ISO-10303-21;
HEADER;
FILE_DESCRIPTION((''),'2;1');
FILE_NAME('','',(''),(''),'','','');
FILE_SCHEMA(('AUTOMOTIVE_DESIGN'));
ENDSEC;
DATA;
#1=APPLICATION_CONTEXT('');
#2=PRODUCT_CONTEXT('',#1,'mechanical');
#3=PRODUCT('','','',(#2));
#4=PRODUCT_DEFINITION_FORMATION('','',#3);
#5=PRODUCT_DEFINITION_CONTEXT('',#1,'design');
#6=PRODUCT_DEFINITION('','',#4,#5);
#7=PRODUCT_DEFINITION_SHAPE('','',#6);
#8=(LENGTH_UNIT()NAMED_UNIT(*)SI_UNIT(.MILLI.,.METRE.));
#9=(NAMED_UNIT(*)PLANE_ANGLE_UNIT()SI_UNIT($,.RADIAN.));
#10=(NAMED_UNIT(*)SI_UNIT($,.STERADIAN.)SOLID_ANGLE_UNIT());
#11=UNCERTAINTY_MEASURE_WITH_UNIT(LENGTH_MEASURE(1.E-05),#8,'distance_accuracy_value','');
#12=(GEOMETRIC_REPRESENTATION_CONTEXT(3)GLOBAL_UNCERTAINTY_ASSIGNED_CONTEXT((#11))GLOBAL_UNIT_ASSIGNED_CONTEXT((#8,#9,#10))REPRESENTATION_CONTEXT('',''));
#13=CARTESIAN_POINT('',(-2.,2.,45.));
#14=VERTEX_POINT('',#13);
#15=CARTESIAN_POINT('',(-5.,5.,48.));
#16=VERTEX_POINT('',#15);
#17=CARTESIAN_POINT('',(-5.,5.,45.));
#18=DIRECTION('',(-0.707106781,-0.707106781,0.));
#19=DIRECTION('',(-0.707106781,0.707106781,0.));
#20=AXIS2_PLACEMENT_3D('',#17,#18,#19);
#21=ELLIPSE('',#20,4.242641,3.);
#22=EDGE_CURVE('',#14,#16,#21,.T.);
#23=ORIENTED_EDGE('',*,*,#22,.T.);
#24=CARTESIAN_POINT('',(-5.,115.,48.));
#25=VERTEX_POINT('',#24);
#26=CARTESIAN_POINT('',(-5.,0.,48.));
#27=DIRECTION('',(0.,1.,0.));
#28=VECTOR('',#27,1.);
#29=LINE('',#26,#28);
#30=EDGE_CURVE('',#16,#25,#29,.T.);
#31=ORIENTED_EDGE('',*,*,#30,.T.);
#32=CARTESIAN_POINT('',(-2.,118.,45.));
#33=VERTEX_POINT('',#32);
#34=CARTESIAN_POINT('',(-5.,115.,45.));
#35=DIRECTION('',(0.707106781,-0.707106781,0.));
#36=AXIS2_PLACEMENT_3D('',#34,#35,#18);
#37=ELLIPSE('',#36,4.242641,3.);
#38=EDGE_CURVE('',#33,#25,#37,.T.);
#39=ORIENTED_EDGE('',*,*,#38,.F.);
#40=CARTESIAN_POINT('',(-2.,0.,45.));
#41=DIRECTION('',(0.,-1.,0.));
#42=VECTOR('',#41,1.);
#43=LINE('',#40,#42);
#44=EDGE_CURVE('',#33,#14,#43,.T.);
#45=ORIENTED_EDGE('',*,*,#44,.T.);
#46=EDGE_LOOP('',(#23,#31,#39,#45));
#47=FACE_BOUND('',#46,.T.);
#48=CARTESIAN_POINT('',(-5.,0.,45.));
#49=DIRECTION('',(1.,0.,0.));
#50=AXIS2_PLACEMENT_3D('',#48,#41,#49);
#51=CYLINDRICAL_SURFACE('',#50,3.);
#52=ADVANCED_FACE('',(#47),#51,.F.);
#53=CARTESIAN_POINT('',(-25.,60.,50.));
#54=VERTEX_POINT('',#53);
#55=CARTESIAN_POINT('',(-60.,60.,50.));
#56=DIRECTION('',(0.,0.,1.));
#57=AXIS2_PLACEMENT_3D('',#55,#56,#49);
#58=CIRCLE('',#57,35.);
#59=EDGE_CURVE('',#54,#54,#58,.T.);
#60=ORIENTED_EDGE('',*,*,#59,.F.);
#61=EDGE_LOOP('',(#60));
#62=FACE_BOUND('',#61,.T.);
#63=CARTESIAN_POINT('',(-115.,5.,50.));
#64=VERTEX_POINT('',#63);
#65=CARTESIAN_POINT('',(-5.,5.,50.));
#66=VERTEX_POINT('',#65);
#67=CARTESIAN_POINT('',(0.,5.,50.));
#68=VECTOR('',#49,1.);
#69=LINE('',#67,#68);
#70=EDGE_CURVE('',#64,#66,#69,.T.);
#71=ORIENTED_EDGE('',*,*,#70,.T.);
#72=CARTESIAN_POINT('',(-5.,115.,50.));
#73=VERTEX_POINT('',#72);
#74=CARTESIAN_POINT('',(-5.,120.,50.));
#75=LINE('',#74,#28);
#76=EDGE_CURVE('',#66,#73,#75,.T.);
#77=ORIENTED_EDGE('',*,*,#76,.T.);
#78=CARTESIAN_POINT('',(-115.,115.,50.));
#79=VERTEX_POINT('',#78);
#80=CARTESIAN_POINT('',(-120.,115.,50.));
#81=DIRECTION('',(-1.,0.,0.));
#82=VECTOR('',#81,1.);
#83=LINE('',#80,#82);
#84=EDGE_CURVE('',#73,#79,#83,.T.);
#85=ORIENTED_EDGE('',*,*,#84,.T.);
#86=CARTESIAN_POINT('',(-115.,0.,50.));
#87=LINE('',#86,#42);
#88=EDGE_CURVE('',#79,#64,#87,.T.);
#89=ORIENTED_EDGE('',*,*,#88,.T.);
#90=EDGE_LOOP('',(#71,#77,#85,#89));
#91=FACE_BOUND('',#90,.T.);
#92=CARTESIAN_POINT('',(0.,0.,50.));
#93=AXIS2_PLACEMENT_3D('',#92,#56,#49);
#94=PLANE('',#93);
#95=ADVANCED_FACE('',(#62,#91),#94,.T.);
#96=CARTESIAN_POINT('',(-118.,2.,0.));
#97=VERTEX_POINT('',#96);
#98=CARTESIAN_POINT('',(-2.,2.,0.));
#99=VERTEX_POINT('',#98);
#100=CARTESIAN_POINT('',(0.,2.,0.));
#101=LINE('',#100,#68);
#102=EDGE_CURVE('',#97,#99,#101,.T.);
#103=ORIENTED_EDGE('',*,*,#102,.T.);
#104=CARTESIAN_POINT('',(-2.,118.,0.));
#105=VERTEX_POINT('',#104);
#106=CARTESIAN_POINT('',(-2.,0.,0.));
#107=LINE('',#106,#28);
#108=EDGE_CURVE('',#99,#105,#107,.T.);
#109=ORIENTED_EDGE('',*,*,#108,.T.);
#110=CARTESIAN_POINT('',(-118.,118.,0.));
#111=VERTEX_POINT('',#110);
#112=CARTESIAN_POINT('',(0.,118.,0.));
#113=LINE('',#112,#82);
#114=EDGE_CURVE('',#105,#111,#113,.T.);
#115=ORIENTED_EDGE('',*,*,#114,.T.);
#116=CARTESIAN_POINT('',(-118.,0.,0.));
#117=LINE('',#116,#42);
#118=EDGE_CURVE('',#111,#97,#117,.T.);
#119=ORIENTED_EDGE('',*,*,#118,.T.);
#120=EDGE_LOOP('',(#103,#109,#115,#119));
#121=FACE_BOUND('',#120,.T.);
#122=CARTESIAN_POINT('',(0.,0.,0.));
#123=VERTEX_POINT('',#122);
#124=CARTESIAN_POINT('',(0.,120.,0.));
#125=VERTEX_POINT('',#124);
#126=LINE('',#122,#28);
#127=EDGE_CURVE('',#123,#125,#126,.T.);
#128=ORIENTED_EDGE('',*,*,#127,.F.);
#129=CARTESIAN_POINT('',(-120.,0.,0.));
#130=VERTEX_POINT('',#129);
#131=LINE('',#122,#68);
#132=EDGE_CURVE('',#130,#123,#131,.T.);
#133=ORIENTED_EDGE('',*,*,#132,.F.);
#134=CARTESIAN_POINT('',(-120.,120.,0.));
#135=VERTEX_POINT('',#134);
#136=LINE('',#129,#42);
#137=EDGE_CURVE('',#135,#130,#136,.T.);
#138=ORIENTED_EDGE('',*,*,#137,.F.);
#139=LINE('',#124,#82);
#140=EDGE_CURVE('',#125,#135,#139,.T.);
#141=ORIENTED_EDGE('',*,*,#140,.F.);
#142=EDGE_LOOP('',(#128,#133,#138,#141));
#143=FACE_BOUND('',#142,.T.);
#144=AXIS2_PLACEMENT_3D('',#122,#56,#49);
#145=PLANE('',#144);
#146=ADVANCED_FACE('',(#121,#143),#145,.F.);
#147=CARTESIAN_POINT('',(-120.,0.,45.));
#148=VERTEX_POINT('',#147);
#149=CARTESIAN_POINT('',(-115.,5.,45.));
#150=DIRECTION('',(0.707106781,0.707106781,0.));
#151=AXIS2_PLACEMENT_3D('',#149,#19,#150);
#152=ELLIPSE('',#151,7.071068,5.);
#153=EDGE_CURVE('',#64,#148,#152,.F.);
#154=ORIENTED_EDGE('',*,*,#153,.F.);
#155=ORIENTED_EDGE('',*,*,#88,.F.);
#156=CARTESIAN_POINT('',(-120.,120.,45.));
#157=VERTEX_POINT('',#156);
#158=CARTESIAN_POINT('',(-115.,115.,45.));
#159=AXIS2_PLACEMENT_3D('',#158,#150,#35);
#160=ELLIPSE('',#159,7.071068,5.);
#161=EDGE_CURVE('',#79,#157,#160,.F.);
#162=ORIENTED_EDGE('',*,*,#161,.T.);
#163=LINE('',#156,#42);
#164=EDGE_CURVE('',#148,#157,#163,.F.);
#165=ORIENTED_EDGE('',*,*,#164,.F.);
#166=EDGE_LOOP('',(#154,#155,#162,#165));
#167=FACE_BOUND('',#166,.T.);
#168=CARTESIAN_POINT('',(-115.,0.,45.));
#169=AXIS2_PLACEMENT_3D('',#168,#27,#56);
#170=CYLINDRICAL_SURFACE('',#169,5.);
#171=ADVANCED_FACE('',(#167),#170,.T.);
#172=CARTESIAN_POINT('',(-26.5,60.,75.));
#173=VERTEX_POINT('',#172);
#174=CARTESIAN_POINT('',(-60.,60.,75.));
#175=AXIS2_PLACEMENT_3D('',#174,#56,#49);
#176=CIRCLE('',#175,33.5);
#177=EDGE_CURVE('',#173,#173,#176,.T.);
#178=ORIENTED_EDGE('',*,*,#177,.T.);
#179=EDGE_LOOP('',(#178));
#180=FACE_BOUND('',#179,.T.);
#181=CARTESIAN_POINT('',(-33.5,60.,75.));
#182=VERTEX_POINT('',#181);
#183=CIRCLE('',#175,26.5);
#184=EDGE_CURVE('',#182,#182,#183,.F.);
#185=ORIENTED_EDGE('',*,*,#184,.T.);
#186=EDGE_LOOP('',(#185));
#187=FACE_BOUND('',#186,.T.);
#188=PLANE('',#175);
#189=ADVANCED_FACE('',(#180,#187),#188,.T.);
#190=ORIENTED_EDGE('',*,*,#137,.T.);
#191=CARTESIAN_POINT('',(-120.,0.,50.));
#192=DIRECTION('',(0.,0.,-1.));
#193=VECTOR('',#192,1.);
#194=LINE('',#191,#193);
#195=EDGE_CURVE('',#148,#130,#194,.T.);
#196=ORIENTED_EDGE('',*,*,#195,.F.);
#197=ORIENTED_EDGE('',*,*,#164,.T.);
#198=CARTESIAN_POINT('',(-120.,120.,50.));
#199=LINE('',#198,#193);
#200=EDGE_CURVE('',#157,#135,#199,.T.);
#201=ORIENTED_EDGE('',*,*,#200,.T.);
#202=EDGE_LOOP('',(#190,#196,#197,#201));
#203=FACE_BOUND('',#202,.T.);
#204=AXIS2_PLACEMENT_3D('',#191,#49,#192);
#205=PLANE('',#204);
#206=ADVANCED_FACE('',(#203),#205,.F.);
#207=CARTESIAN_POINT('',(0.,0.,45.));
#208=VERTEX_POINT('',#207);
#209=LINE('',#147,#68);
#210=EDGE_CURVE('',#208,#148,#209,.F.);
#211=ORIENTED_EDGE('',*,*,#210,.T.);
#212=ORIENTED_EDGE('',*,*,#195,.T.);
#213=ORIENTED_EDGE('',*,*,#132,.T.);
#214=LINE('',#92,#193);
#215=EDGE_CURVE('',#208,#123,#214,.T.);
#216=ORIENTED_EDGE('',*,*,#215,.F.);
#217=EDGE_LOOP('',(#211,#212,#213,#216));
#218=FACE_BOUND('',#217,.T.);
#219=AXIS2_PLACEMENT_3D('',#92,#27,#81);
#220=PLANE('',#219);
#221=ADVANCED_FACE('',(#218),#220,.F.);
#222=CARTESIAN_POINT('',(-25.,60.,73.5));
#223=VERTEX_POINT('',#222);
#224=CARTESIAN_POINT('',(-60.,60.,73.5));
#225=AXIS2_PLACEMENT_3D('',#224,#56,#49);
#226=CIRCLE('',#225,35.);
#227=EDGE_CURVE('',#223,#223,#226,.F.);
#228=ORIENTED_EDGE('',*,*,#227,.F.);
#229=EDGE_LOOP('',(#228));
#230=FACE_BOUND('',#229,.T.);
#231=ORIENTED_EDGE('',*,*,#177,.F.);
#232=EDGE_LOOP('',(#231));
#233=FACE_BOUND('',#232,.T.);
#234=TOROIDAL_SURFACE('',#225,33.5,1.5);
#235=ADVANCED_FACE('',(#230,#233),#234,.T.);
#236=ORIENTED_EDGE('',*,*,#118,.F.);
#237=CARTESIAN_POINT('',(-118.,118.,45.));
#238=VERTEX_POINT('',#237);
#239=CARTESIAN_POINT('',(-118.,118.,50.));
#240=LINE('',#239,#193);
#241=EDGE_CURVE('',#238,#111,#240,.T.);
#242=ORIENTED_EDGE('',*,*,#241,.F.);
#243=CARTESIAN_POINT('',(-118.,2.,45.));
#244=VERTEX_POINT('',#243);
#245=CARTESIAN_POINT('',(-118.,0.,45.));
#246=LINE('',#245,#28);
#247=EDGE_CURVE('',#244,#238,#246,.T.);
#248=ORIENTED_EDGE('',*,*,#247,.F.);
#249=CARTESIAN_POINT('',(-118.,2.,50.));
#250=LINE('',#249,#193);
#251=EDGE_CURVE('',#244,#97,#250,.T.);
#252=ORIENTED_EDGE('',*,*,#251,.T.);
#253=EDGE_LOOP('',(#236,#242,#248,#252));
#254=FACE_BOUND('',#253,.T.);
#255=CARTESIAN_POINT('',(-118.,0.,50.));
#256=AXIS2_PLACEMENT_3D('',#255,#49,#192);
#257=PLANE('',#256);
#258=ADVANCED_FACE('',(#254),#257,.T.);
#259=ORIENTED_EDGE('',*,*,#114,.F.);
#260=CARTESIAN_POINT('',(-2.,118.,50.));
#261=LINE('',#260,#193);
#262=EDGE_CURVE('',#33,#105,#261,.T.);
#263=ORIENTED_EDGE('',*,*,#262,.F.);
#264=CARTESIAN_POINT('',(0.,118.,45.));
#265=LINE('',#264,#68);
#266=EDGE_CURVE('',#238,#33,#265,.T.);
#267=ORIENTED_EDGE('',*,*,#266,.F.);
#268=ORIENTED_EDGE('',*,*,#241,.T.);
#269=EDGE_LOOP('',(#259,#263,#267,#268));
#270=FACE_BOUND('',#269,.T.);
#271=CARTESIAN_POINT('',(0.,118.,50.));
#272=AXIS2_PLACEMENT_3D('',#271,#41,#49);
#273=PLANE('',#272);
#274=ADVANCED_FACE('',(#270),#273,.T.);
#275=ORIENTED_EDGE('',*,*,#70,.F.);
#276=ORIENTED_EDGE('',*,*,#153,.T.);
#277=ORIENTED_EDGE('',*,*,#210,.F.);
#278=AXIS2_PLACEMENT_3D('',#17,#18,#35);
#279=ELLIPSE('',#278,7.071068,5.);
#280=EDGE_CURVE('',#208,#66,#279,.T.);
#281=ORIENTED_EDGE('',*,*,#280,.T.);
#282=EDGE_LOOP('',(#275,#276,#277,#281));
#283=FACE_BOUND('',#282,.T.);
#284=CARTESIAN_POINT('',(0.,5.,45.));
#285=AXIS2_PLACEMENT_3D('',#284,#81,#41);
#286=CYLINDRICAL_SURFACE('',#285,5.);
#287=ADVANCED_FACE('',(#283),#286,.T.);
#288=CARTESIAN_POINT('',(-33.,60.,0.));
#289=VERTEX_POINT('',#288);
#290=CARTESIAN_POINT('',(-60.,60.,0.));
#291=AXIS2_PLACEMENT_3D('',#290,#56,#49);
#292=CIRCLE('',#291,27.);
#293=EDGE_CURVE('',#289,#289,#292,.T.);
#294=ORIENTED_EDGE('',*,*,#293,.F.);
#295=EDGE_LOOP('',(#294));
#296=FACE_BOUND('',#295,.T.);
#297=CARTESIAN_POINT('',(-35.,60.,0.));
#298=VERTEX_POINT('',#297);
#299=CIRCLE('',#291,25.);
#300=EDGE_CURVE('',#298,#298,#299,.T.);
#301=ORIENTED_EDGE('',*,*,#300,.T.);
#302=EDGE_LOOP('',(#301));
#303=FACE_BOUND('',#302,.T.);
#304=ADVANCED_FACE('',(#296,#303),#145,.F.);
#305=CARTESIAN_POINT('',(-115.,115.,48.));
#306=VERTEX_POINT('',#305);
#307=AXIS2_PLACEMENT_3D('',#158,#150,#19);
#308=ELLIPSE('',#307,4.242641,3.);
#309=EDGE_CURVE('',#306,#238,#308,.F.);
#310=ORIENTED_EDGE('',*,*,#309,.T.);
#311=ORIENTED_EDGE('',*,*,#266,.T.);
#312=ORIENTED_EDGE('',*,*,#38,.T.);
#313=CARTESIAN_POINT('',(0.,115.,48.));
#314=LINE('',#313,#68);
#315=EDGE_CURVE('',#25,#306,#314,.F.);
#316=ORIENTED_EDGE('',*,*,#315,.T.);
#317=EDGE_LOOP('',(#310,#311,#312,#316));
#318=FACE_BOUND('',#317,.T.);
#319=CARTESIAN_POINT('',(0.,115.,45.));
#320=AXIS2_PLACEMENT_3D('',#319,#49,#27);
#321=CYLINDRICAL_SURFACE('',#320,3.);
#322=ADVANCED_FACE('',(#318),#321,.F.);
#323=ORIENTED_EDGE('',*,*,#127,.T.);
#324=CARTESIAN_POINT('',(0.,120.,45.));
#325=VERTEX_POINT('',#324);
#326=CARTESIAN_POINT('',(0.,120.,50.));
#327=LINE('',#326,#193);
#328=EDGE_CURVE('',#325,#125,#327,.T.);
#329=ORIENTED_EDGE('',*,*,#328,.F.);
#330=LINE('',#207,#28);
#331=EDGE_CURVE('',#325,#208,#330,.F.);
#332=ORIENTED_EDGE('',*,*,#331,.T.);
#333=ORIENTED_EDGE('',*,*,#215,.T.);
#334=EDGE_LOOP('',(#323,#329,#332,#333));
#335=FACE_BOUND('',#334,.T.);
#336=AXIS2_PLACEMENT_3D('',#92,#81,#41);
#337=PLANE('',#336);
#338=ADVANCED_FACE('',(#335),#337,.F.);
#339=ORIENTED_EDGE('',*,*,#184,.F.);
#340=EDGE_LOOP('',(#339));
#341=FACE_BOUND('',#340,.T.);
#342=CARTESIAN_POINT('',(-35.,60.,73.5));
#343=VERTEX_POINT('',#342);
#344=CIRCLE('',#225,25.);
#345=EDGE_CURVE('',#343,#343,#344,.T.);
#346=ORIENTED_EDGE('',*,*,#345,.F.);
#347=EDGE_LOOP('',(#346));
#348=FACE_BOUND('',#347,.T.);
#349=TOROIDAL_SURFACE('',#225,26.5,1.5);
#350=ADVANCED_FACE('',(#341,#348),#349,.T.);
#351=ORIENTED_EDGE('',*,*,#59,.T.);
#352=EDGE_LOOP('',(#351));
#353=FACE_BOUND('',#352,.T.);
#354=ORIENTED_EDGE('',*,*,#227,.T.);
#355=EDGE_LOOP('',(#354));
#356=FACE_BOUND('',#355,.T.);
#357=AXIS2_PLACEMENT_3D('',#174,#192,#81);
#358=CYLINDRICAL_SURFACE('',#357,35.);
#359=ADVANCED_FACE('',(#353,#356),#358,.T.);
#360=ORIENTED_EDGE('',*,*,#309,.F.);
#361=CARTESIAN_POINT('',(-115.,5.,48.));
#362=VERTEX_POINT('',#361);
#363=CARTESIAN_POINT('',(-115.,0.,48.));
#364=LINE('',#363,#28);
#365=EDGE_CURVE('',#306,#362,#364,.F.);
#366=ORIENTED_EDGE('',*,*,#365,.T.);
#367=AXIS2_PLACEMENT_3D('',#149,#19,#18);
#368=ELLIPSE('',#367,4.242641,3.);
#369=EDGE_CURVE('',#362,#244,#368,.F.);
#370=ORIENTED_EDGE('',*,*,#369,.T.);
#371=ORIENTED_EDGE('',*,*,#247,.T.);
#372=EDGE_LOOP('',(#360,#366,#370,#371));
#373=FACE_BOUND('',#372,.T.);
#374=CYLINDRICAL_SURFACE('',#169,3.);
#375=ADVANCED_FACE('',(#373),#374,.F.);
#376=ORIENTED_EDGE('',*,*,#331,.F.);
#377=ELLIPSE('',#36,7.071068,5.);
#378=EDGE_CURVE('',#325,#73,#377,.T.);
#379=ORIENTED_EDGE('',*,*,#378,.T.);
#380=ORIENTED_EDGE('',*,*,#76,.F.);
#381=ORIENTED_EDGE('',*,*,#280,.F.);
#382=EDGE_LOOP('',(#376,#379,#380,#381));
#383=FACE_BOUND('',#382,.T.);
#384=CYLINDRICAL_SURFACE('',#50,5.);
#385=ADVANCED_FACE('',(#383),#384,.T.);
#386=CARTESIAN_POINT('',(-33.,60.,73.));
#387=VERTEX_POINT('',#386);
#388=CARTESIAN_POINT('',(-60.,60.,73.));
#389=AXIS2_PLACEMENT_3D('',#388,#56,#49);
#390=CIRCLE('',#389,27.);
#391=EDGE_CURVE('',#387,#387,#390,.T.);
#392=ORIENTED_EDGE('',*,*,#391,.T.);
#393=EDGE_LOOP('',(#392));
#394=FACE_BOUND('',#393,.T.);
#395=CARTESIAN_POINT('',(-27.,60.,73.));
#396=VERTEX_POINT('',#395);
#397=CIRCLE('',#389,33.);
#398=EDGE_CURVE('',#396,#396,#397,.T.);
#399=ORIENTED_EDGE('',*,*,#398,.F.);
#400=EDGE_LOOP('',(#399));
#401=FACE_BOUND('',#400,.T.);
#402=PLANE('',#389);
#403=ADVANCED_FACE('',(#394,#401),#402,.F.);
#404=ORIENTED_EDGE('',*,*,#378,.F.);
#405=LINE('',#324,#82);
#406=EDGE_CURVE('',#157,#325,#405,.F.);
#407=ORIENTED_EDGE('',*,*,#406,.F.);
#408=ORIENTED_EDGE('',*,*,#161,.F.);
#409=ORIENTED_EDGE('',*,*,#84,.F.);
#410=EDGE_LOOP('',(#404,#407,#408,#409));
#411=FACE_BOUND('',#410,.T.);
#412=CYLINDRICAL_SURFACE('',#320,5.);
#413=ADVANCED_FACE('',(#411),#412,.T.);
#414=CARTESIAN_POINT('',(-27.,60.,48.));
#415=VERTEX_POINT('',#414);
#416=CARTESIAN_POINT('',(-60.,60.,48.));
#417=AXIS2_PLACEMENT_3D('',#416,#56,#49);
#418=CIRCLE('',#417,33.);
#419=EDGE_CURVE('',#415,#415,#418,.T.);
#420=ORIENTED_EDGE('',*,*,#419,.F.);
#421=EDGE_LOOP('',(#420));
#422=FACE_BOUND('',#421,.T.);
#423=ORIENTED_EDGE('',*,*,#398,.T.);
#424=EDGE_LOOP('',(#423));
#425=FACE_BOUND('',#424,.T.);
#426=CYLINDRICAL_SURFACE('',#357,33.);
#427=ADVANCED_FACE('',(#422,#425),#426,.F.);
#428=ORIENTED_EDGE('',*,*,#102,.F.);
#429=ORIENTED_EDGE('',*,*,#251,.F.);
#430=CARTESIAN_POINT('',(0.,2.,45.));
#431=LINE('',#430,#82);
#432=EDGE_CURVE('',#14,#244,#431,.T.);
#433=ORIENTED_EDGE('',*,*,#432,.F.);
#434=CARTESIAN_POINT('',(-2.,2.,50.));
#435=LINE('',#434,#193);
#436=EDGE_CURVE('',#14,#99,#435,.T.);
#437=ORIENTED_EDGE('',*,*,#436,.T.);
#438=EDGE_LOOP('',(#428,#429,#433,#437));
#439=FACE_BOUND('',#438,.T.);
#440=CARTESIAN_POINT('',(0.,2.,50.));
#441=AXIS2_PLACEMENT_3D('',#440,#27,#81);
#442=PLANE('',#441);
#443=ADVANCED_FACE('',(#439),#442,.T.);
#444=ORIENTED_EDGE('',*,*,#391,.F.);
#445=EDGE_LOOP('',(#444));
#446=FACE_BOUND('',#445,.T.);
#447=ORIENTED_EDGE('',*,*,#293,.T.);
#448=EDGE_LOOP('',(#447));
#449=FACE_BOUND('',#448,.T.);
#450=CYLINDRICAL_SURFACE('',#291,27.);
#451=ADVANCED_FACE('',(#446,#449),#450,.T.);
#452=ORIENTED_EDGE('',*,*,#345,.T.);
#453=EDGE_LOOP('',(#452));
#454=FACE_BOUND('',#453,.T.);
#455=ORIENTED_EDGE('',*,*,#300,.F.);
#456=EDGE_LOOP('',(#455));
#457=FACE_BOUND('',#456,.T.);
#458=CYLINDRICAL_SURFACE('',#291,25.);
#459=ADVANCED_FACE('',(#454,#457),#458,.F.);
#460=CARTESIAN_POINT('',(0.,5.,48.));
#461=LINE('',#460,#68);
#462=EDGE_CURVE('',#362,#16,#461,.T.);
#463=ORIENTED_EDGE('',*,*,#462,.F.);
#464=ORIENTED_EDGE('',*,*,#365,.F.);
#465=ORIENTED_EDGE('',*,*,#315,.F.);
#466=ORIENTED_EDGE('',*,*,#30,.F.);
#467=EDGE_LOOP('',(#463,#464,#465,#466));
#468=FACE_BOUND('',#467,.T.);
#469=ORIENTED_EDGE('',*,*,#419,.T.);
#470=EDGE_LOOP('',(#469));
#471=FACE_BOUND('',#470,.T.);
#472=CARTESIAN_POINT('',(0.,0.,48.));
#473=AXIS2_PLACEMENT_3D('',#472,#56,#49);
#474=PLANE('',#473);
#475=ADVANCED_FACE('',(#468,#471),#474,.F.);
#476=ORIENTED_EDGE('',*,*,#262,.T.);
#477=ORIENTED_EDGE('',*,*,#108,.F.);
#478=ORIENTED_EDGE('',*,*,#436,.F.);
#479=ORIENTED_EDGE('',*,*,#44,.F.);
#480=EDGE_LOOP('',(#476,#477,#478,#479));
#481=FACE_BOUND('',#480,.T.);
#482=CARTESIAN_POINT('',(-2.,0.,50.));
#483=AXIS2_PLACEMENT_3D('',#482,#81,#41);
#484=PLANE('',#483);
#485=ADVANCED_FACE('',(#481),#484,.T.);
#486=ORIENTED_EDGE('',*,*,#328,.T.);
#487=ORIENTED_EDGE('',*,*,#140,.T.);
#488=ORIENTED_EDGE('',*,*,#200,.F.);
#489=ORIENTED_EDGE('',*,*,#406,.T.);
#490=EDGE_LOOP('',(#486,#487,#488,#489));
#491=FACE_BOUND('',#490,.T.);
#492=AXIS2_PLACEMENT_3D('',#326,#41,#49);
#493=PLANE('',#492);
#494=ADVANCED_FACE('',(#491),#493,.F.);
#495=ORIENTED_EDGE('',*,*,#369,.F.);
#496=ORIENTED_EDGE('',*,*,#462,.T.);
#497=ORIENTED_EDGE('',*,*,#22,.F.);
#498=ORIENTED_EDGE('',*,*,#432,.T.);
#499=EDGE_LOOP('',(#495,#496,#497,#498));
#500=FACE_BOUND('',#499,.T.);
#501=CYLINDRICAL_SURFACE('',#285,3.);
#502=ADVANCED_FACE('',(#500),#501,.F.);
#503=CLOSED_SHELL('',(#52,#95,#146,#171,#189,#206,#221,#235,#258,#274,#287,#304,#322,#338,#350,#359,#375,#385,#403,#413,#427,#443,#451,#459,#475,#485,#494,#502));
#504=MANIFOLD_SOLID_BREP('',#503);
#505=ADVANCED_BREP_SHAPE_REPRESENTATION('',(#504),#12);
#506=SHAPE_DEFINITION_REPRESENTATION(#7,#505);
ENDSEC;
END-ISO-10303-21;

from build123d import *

# Parameters (mm, degrees)
SKETCH2_W            = 120
SKETCH2_H            = 120
BOSS_EXTRUDE1_DEPTH  = 50
SKETCH3_R            = 35
BOSS_EXTRUDE2_DEPTH  = 25
SKETCH4_R            = 25
CUT_EXTRUDE1_DEPTH   = 186.539753153
FILLET1_R            = 5
FILLET2_R            = 1.5
SHELL1_OUTLINE_W     = 116
SHELL1_OUTLINE_H     = 116
SHELL1_OUTLINE_R     = 27
SHELL1_DEPTH         = 45
SHELL1_2_OUTLINE_R   = 33
SHELL1_2_OUTLINE_R_2 = 27
SHELL1_2_DEPTH       = 73
SHELL1_START         = -118
SHELL1_3_DEPTH       = 116
SHELL1_START_2       = 1
SHELL1_4_DEPTH       = 118
SHELL1_START_3       = 45
SHELL1_5_OUTLINE_R   = 27
SHELL1_5_OUTLINE_R_2 = 25
SHELL1_5_DEPTH       = 3


with BuildPart() as part:
    # Sketch2 → Boss-Extrude1 (new body)
    with BuildSketch(Plane.XY):
        with Locations((-60, 60)):
            Rectangle(SKETCH2_W, SKETCH2_H)
    extrude(amount=BOSS_EXTRUDE1_DEPTH)

    # Sketch3 → Boss-Extrude2 (add)
    with BuildSketch(Plane.XY.offset(50)):
        with Locations((-60, 60)):
            Circle(SKETCH3_R)
    extrude(amount=BOSS_EXTRUDE2_DEPTH)

    # Sketch4 → Cut-Extrude1 (cut, through all)
    with BuildSketch(Plane.XY.offset(75)):
        with Locations((-60, 60)):
            Circle(SKETCH4_R)
    extrude(amount=-CUT_EXTRUDE1_DEPTH, mode=Mode.SUBTRACT)

    # Fillet1
    fillet1_edges = [part.edges().sort_by_distance(p)[0] for p in [
        (-120, 60, 50),
        (-60, 0, 50),
        (0, 60, 50),
        (-60, 120, 50),
    ]]
    fillet(fillet1_edges, radius=FILLET1_R)

    # Fillet2
    fillet2_edges = [part.edges().sort_by_distance(p)[0] for p in [
        (-95, 60, 75),
        (-85, 60, 75),
    ]]
    fillet(fillet2_edges, radius=FILLET2_R)

    # Shell1: read off the stored shape, not the designer's step
    # Shell1 outline → Shell1 (cut)
    with BuildSketch(Plane.XY):
        with Locations((-60, 60)):
            Rectangle(SHELL1_OUTLINE_W, SHELL1_OUTLINE_H)
        with Locations((-60, 60)):
            Circle(SHELL1_OUTLINE_R, mode=Mode.SUBTRACT)
    extrude(amount=SHELL1_DEPTH, mode=Mode.SUBTRACT)

    # Shell1 2 outline → Shell1 2 (cut)
    with BuildSketch(Plane.XY):
        with Locations((-60, 60)):
            Circle(SHELL1_2_OUTLINE_R)
        with Locations((-60, 60)):
            Circle(SHELL1_2_OUTLINE_R_2, mode=Mode.SUBTRACT)
    extrude(amount=SHELL1_2_DEPTH, mode=Mode.SUBTRACT)

    # Shell1 3 outline → Shell1 3 (cut)
    with BuildSketch(Plane.YZ.offset(SHELL1_START)):
        with BuildLine():
            ThreePointArc((118, 45), (117.121320344, 47.121320344), (115, 48))
            Line((115, 48), (5, 48))
            ThreePointArc((5, 48), (2.878679656, 47.121320344), (2, 45))
            Line((2, 45), (118, 45))
        make_face()
    extrude(amount=SHELL1_3_DEPTH, mode=Mode.SUBTRACT)

    # Shell1 4 outline → Shell1 4 (add)
    with BuildSketch(Plane(origin=(0, 0, 0), x_dir=(1, 0, 0), z_dir=(0, 1, 0)).offset(SHELL1_START_2)):
        with BuildLine():
            ThreePointArc((-2, -45), (-2.878679656, -47.121320344), (-5, -48))
            Line((-5, -48), (-2, -48))
            Line((-2, -48), (-2, -45))
        make_face()
        with BuildLine():
            ThreePointArc((-115, -48), (-117.121320344, -47.121320344), (-118, -45))
            Line((-118, -45), (-118, -48))
            Line((-118, -48), (-115, -48))
        make_face()
    extrude(amount=SHELL1_4_DEPTH)

    # Shell1 5 outline → Shell1 5 (add)
    with BuildSketch(Plane.XY.offset(SHELL1_START_3)):
        with Locations((-60, 60)):
            Circle(SHELL1_5_OUTLINE_R)
        with Locations((-60, 60)):
            Circle(SHELL1_5_OUTLINE_R_2, mode=Mode.SUBTRACT)
    extrude(amount=SHELL1_5_DEPTH)


solid = part.part
